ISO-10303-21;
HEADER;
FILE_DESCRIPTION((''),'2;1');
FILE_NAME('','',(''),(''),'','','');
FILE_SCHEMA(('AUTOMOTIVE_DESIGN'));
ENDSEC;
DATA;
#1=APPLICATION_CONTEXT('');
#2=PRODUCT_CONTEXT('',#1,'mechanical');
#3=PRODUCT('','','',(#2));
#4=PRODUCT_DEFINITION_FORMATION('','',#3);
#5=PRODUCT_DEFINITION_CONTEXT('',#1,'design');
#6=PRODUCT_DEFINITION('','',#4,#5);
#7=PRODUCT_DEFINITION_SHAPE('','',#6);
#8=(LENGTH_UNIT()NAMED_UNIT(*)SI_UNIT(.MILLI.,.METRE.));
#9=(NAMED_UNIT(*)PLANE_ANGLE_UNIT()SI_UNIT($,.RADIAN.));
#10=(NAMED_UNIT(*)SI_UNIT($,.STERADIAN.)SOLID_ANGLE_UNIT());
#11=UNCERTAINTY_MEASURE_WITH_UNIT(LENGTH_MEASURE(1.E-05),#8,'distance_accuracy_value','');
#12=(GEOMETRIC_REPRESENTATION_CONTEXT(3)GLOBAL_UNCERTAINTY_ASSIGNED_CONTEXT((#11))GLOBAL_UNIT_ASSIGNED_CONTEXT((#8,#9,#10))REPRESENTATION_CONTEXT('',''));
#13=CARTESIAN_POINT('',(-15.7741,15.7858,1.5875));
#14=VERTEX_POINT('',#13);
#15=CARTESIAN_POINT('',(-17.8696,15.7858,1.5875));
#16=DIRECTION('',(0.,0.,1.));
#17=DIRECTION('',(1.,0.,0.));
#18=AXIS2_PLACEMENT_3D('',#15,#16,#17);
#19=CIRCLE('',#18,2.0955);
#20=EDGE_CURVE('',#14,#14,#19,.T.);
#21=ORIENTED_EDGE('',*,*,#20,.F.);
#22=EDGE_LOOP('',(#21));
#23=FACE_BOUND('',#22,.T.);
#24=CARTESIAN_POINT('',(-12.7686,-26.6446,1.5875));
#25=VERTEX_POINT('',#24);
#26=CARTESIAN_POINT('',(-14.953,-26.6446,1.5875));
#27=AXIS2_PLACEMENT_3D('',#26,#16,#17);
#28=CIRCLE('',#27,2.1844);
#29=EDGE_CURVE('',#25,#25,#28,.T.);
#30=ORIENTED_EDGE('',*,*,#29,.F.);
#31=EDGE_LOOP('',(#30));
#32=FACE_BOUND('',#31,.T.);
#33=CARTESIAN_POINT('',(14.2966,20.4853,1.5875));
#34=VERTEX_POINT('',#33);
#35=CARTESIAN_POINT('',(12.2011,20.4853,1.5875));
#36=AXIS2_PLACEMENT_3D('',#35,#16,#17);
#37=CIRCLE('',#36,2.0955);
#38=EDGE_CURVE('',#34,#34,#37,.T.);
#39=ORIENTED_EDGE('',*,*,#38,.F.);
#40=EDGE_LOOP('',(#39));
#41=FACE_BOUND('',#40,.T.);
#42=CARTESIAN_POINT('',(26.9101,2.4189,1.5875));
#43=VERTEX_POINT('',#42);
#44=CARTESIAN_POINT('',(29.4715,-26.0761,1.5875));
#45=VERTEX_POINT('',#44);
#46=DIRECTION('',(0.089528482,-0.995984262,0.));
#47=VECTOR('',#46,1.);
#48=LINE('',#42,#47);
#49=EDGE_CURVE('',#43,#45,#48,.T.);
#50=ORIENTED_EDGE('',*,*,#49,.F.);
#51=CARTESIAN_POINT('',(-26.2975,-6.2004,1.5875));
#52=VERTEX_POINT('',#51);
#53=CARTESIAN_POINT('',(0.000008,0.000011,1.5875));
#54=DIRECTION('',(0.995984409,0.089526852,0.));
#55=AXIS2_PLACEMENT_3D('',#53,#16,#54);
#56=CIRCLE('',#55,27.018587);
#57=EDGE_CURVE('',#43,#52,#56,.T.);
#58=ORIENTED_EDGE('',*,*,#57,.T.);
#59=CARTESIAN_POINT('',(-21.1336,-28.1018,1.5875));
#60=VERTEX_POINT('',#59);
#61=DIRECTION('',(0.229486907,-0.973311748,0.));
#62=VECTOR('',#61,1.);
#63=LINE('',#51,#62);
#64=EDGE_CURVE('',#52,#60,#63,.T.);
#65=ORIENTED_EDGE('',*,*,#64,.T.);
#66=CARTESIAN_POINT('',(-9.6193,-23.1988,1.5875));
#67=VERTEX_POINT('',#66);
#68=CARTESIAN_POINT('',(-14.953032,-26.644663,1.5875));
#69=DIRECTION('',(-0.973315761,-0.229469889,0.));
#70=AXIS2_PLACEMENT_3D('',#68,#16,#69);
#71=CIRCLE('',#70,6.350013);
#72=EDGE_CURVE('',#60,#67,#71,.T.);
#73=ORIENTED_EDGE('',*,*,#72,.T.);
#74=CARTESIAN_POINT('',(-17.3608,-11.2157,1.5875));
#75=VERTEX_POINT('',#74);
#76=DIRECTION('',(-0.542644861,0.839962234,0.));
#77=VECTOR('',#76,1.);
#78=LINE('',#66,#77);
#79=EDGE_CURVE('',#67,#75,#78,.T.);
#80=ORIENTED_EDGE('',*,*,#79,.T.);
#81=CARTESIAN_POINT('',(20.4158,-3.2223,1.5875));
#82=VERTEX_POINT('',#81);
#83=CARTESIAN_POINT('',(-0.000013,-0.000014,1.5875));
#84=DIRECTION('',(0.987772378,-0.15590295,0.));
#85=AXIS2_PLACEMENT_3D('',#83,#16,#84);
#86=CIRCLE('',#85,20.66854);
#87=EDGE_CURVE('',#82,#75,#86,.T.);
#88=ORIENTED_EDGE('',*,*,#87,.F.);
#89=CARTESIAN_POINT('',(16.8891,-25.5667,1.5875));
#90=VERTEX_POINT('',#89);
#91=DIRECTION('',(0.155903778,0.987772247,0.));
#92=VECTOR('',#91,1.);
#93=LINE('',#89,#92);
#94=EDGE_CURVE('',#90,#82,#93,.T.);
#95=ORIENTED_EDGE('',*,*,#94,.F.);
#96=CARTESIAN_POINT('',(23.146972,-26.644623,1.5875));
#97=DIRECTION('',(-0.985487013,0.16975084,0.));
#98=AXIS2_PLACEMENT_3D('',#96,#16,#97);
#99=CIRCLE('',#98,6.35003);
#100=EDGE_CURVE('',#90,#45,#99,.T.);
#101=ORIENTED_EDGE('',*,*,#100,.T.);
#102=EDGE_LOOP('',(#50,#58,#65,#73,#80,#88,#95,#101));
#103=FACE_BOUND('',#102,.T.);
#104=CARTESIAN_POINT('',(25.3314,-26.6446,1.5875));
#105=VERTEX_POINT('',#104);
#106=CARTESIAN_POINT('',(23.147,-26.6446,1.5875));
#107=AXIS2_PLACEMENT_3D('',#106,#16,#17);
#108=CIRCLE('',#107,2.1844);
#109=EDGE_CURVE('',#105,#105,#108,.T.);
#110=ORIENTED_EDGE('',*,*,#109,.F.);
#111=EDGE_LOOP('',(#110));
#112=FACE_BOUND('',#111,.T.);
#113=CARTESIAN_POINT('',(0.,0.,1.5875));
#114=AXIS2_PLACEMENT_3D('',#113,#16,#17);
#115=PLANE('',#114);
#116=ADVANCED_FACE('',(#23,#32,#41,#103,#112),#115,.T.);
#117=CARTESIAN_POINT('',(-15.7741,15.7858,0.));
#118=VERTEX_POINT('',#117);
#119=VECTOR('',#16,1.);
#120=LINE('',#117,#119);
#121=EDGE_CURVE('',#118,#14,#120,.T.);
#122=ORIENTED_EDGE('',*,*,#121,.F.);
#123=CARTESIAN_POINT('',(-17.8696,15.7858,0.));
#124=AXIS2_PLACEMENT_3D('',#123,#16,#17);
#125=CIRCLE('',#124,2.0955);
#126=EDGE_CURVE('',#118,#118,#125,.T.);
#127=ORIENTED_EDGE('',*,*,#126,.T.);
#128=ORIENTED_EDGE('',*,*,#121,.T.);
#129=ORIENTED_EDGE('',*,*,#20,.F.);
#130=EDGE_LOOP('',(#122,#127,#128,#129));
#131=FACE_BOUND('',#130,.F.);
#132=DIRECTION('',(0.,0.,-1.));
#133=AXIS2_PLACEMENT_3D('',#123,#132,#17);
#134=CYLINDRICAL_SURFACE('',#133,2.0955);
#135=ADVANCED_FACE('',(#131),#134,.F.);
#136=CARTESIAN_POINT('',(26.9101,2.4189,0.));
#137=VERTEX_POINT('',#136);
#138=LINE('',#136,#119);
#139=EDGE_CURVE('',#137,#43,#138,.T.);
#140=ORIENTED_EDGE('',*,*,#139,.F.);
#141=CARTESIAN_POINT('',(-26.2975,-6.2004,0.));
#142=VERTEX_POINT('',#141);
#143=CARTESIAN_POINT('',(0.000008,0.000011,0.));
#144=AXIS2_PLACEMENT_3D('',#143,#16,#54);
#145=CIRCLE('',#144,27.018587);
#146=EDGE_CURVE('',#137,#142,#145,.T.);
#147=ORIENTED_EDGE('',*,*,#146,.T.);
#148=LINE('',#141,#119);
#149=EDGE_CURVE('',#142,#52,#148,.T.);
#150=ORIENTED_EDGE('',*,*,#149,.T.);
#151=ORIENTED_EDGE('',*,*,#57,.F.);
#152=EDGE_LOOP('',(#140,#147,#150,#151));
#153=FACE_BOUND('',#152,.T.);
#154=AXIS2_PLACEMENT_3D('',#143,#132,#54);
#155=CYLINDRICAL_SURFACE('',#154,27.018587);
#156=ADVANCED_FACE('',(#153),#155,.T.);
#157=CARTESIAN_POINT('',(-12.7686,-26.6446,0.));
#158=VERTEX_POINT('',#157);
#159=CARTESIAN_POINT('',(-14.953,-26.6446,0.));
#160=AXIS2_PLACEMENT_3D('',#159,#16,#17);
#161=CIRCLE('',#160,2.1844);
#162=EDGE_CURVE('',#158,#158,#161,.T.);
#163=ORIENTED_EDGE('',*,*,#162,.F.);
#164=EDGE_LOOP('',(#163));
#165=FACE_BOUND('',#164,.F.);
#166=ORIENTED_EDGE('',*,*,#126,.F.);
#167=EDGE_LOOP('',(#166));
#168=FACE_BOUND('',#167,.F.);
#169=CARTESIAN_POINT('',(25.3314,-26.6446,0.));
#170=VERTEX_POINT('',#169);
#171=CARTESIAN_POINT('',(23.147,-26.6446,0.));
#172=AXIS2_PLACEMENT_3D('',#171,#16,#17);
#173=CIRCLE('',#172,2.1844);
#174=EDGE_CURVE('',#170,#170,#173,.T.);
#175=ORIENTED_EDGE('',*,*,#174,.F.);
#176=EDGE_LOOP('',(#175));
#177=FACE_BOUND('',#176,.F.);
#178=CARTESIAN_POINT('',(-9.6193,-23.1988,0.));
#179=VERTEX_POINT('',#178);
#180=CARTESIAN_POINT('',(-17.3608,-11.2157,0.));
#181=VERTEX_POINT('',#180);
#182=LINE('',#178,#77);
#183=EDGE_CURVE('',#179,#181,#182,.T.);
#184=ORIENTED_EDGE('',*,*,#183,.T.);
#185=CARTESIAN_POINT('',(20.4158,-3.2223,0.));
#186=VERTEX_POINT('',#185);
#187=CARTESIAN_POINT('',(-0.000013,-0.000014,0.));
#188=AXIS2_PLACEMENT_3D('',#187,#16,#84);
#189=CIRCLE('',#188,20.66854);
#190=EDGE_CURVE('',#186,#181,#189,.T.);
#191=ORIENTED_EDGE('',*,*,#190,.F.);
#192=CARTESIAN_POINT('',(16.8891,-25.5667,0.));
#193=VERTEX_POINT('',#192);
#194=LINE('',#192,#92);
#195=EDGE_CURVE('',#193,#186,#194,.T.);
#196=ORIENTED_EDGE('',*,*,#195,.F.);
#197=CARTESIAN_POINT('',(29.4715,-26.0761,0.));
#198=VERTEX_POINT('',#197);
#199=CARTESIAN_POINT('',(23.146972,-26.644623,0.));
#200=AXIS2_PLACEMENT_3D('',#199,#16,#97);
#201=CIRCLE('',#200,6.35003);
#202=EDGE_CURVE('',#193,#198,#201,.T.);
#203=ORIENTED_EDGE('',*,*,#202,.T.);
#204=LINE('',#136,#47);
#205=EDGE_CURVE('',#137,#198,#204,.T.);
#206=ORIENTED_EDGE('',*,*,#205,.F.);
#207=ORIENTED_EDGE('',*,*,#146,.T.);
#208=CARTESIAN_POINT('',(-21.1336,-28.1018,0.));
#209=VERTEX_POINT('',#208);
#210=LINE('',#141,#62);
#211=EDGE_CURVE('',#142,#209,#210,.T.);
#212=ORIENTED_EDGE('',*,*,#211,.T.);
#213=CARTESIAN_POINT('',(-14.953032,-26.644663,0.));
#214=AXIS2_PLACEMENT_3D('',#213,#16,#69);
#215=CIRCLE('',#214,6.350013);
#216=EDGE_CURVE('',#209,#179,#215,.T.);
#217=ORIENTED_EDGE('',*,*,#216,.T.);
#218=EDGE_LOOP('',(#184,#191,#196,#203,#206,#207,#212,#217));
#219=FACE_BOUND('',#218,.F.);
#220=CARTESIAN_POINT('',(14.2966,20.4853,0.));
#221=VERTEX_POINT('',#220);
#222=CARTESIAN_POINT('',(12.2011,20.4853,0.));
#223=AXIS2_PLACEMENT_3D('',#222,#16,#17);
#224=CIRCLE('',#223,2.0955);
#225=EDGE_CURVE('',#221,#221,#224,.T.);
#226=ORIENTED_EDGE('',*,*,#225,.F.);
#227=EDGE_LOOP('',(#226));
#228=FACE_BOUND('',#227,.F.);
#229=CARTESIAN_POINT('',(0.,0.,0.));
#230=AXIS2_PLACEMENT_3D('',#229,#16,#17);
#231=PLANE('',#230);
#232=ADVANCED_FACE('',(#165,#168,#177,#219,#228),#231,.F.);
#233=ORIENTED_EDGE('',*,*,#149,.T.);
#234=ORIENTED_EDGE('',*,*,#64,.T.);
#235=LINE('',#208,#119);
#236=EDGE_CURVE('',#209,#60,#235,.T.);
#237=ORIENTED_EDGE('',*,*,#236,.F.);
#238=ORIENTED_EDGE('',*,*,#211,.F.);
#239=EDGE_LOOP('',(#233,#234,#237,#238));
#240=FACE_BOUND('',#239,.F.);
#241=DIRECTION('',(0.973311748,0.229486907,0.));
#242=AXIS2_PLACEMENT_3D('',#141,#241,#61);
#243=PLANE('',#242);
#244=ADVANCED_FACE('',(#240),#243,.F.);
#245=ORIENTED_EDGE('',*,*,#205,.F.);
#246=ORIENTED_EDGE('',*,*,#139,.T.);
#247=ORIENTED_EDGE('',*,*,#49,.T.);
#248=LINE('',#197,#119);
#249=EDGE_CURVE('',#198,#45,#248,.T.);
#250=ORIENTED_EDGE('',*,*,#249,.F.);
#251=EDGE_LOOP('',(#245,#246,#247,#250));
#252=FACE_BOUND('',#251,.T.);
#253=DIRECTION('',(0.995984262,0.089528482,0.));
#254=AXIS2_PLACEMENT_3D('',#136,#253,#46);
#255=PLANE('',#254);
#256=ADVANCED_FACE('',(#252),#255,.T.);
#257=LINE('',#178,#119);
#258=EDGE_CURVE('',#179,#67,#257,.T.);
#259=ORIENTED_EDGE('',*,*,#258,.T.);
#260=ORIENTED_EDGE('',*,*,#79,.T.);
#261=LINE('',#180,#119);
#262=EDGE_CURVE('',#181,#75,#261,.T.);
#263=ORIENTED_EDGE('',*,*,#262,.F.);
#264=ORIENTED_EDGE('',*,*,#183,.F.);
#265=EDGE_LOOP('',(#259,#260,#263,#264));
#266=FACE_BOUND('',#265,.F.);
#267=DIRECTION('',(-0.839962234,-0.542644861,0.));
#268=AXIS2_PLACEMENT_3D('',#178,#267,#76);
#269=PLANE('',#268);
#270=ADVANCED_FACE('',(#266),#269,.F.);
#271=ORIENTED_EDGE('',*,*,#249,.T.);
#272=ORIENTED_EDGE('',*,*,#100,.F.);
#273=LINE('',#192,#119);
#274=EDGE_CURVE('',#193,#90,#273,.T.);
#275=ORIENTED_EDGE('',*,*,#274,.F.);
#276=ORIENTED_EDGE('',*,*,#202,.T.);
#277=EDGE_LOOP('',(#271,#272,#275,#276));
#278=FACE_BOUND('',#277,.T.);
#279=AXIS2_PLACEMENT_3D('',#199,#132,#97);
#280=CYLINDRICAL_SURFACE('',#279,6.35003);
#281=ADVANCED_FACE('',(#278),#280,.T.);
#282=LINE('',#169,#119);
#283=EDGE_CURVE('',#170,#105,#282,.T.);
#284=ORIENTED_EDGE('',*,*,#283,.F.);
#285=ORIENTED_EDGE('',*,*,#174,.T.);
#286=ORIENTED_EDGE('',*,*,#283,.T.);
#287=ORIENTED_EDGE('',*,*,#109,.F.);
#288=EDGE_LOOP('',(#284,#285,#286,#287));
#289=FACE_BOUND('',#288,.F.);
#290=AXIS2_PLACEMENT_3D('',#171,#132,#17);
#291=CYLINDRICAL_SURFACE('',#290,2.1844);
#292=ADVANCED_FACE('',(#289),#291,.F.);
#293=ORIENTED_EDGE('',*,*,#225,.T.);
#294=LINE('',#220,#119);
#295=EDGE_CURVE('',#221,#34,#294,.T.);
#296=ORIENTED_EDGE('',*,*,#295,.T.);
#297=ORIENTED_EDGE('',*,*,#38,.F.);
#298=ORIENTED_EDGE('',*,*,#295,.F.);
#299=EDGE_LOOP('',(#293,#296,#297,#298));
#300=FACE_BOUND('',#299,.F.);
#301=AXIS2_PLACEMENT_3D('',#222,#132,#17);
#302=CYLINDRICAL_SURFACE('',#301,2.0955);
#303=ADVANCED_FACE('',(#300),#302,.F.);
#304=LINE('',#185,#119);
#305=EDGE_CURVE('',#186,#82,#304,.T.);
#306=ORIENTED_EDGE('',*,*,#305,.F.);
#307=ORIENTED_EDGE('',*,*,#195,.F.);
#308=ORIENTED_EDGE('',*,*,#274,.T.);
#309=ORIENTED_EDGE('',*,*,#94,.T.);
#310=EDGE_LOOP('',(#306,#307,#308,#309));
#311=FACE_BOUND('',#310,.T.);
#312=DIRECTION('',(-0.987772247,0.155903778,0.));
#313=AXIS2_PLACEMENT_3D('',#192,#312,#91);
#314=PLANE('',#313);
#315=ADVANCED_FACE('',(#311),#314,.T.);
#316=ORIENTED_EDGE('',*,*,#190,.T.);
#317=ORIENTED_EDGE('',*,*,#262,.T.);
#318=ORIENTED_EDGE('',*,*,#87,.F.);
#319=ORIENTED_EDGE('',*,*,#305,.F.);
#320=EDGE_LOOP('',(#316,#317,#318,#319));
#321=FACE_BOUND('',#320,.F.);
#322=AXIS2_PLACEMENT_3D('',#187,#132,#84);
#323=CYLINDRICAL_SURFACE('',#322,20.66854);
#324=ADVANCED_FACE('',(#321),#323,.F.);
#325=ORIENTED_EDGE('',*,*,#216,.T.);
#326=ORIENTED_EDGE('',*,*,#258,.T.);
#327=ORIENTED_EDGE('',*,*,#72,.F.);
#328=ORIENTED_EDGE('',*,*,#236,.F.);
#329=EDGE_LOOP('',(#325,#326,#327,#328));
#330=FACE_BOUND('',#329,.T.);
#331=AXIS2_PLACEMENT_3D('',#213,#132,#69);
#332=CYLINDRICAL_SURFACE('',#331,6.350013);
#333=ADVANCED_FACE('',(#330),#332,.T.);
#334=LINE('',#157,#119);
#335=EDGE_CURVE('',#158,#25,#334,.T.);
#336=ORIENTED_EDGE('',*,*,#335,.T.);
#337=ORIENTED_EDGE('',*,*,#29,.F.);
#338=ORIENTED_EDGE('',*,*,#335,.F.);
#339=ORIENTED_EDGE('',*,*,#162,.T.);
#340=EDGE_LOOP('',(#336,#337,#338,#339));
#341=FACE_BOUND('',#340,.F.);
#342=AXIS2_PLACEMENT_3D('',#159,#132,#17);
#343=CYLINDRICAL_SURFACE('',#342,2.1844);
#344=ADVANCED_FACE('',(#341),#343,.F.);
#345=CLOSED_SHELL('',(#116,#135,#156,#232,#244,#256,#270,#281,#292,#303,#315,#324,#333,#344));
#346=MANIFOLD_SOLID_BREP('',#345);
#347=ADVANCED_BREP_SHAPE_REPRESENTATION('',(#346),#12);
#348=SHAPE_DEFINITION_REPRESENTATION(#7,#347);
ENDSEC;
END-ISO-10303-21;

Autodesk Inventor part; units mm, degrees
ref_plane "YZ Plane" through (0, 0, 0) normal (1, 0, 0) x (0, 1, 0)
ref_plane "XZ Plane" through (0, 0, 0) normal (0, 1, 0) x (-1, 0, 0)
ref_plane "XY Plane" through (0, 0, 0) normal (0, 0, 1) x (1, 0, 0)
sketch "main" plane through (0, 0, 0) normal (0, 0, 1) x (1, 0, 0)
  circle A0 centre (-12.7091, -24.4332) radius 2.1844
  circle A1 centre (25.3909, -24.4332) radius 2.1844
  arc A2 (19.133, -23.3552) -> (31.7154, -23.8647) centre (25.3909, -24.4332) ccw
  arc A3 (-18.8897, -25.8904) -> (-7.3754, -20.9874) centre (-12.7091, -24.4332) ccw
  arc A4 (29.1539, 4.6304) -> (-24.0536, -3.989) centre (2.2439, 2.2114) ccw
  line L0 (29.1539, 4.6304) -> (31.7154, -23.8647)
  line L1 (-24.0536, -3.989) -> (-18.8897, -25.8904)
  arc A5 (22.6597, -1.0109) -> (-15.1169, -9.0043) centre (2.2439, 2.2114) ccw
  line L2 (19.133, -23.3552) -> (22.6597, -1.0109)
  line L3 (-7.3754, -20.9874) -> (-15.1169, -9.0043)
  circle A6 centre (-15.6258, 17.9972) radius 2.0955
  circle A7 centre (14.445, 22.6967) radius 2.0955
  point P0 (4.9022, -14.671)
  dimension "d0" = 12.7
  dimension "d1" = 12.7
  dimension "d2" = 6.35
  dimension "d5" = 4.191
  dimension "d6" = 23.8436
  dimension "d7" = 4.191
  dimension "d8" = 23.8436
sketch "Sketch1" plane through (0, 0, 0) normal (0, 0, 1) x (1, 0, 0)
  circle A0 centre (-14.953, -26.6446) radius 2.1844
  circle A1 centre (23.147, -26.6446) radius 2.1844
  arc A2 (16.8891, -25.5667) -> (29.4715, -26.0761) centre (23.147, -26.6446) ccw
  arc A3 (-21.1336, -28.1018) -> (-9.6193, -23.1988) centre (-14.953, -26.6446) ccw
  arc A4 (26.9101, 2.4189) -> (-26.2975, -6.2004) centre (0, 0) ccw
  line L0 (26.9101, 2.4189) -> (29.4715, -26.0761)
  line L1 (-26.2975, -6.2004) -> (-21.1336, -28.1018)
  arc A5 (20.4158, -3.2223) -> (-17.3608, -11.2157) centre (0, 0) ccw
  line L2 (16.8891, -25.5667) -> (20.4158, -3.2223)
  line L3 (-9.6193, -23.1988) -> (-17.3608, -11.2157)
  circle A6 centre (-17.8696, 15.7858) radius 2.0955
  circle A7 centre (12.2011, 20.4853) radius 2.0955
extrude "Extrusion1" add sketch "Sketch1" along normal blind 1.5875
properties part number "Reservoir Mount"
